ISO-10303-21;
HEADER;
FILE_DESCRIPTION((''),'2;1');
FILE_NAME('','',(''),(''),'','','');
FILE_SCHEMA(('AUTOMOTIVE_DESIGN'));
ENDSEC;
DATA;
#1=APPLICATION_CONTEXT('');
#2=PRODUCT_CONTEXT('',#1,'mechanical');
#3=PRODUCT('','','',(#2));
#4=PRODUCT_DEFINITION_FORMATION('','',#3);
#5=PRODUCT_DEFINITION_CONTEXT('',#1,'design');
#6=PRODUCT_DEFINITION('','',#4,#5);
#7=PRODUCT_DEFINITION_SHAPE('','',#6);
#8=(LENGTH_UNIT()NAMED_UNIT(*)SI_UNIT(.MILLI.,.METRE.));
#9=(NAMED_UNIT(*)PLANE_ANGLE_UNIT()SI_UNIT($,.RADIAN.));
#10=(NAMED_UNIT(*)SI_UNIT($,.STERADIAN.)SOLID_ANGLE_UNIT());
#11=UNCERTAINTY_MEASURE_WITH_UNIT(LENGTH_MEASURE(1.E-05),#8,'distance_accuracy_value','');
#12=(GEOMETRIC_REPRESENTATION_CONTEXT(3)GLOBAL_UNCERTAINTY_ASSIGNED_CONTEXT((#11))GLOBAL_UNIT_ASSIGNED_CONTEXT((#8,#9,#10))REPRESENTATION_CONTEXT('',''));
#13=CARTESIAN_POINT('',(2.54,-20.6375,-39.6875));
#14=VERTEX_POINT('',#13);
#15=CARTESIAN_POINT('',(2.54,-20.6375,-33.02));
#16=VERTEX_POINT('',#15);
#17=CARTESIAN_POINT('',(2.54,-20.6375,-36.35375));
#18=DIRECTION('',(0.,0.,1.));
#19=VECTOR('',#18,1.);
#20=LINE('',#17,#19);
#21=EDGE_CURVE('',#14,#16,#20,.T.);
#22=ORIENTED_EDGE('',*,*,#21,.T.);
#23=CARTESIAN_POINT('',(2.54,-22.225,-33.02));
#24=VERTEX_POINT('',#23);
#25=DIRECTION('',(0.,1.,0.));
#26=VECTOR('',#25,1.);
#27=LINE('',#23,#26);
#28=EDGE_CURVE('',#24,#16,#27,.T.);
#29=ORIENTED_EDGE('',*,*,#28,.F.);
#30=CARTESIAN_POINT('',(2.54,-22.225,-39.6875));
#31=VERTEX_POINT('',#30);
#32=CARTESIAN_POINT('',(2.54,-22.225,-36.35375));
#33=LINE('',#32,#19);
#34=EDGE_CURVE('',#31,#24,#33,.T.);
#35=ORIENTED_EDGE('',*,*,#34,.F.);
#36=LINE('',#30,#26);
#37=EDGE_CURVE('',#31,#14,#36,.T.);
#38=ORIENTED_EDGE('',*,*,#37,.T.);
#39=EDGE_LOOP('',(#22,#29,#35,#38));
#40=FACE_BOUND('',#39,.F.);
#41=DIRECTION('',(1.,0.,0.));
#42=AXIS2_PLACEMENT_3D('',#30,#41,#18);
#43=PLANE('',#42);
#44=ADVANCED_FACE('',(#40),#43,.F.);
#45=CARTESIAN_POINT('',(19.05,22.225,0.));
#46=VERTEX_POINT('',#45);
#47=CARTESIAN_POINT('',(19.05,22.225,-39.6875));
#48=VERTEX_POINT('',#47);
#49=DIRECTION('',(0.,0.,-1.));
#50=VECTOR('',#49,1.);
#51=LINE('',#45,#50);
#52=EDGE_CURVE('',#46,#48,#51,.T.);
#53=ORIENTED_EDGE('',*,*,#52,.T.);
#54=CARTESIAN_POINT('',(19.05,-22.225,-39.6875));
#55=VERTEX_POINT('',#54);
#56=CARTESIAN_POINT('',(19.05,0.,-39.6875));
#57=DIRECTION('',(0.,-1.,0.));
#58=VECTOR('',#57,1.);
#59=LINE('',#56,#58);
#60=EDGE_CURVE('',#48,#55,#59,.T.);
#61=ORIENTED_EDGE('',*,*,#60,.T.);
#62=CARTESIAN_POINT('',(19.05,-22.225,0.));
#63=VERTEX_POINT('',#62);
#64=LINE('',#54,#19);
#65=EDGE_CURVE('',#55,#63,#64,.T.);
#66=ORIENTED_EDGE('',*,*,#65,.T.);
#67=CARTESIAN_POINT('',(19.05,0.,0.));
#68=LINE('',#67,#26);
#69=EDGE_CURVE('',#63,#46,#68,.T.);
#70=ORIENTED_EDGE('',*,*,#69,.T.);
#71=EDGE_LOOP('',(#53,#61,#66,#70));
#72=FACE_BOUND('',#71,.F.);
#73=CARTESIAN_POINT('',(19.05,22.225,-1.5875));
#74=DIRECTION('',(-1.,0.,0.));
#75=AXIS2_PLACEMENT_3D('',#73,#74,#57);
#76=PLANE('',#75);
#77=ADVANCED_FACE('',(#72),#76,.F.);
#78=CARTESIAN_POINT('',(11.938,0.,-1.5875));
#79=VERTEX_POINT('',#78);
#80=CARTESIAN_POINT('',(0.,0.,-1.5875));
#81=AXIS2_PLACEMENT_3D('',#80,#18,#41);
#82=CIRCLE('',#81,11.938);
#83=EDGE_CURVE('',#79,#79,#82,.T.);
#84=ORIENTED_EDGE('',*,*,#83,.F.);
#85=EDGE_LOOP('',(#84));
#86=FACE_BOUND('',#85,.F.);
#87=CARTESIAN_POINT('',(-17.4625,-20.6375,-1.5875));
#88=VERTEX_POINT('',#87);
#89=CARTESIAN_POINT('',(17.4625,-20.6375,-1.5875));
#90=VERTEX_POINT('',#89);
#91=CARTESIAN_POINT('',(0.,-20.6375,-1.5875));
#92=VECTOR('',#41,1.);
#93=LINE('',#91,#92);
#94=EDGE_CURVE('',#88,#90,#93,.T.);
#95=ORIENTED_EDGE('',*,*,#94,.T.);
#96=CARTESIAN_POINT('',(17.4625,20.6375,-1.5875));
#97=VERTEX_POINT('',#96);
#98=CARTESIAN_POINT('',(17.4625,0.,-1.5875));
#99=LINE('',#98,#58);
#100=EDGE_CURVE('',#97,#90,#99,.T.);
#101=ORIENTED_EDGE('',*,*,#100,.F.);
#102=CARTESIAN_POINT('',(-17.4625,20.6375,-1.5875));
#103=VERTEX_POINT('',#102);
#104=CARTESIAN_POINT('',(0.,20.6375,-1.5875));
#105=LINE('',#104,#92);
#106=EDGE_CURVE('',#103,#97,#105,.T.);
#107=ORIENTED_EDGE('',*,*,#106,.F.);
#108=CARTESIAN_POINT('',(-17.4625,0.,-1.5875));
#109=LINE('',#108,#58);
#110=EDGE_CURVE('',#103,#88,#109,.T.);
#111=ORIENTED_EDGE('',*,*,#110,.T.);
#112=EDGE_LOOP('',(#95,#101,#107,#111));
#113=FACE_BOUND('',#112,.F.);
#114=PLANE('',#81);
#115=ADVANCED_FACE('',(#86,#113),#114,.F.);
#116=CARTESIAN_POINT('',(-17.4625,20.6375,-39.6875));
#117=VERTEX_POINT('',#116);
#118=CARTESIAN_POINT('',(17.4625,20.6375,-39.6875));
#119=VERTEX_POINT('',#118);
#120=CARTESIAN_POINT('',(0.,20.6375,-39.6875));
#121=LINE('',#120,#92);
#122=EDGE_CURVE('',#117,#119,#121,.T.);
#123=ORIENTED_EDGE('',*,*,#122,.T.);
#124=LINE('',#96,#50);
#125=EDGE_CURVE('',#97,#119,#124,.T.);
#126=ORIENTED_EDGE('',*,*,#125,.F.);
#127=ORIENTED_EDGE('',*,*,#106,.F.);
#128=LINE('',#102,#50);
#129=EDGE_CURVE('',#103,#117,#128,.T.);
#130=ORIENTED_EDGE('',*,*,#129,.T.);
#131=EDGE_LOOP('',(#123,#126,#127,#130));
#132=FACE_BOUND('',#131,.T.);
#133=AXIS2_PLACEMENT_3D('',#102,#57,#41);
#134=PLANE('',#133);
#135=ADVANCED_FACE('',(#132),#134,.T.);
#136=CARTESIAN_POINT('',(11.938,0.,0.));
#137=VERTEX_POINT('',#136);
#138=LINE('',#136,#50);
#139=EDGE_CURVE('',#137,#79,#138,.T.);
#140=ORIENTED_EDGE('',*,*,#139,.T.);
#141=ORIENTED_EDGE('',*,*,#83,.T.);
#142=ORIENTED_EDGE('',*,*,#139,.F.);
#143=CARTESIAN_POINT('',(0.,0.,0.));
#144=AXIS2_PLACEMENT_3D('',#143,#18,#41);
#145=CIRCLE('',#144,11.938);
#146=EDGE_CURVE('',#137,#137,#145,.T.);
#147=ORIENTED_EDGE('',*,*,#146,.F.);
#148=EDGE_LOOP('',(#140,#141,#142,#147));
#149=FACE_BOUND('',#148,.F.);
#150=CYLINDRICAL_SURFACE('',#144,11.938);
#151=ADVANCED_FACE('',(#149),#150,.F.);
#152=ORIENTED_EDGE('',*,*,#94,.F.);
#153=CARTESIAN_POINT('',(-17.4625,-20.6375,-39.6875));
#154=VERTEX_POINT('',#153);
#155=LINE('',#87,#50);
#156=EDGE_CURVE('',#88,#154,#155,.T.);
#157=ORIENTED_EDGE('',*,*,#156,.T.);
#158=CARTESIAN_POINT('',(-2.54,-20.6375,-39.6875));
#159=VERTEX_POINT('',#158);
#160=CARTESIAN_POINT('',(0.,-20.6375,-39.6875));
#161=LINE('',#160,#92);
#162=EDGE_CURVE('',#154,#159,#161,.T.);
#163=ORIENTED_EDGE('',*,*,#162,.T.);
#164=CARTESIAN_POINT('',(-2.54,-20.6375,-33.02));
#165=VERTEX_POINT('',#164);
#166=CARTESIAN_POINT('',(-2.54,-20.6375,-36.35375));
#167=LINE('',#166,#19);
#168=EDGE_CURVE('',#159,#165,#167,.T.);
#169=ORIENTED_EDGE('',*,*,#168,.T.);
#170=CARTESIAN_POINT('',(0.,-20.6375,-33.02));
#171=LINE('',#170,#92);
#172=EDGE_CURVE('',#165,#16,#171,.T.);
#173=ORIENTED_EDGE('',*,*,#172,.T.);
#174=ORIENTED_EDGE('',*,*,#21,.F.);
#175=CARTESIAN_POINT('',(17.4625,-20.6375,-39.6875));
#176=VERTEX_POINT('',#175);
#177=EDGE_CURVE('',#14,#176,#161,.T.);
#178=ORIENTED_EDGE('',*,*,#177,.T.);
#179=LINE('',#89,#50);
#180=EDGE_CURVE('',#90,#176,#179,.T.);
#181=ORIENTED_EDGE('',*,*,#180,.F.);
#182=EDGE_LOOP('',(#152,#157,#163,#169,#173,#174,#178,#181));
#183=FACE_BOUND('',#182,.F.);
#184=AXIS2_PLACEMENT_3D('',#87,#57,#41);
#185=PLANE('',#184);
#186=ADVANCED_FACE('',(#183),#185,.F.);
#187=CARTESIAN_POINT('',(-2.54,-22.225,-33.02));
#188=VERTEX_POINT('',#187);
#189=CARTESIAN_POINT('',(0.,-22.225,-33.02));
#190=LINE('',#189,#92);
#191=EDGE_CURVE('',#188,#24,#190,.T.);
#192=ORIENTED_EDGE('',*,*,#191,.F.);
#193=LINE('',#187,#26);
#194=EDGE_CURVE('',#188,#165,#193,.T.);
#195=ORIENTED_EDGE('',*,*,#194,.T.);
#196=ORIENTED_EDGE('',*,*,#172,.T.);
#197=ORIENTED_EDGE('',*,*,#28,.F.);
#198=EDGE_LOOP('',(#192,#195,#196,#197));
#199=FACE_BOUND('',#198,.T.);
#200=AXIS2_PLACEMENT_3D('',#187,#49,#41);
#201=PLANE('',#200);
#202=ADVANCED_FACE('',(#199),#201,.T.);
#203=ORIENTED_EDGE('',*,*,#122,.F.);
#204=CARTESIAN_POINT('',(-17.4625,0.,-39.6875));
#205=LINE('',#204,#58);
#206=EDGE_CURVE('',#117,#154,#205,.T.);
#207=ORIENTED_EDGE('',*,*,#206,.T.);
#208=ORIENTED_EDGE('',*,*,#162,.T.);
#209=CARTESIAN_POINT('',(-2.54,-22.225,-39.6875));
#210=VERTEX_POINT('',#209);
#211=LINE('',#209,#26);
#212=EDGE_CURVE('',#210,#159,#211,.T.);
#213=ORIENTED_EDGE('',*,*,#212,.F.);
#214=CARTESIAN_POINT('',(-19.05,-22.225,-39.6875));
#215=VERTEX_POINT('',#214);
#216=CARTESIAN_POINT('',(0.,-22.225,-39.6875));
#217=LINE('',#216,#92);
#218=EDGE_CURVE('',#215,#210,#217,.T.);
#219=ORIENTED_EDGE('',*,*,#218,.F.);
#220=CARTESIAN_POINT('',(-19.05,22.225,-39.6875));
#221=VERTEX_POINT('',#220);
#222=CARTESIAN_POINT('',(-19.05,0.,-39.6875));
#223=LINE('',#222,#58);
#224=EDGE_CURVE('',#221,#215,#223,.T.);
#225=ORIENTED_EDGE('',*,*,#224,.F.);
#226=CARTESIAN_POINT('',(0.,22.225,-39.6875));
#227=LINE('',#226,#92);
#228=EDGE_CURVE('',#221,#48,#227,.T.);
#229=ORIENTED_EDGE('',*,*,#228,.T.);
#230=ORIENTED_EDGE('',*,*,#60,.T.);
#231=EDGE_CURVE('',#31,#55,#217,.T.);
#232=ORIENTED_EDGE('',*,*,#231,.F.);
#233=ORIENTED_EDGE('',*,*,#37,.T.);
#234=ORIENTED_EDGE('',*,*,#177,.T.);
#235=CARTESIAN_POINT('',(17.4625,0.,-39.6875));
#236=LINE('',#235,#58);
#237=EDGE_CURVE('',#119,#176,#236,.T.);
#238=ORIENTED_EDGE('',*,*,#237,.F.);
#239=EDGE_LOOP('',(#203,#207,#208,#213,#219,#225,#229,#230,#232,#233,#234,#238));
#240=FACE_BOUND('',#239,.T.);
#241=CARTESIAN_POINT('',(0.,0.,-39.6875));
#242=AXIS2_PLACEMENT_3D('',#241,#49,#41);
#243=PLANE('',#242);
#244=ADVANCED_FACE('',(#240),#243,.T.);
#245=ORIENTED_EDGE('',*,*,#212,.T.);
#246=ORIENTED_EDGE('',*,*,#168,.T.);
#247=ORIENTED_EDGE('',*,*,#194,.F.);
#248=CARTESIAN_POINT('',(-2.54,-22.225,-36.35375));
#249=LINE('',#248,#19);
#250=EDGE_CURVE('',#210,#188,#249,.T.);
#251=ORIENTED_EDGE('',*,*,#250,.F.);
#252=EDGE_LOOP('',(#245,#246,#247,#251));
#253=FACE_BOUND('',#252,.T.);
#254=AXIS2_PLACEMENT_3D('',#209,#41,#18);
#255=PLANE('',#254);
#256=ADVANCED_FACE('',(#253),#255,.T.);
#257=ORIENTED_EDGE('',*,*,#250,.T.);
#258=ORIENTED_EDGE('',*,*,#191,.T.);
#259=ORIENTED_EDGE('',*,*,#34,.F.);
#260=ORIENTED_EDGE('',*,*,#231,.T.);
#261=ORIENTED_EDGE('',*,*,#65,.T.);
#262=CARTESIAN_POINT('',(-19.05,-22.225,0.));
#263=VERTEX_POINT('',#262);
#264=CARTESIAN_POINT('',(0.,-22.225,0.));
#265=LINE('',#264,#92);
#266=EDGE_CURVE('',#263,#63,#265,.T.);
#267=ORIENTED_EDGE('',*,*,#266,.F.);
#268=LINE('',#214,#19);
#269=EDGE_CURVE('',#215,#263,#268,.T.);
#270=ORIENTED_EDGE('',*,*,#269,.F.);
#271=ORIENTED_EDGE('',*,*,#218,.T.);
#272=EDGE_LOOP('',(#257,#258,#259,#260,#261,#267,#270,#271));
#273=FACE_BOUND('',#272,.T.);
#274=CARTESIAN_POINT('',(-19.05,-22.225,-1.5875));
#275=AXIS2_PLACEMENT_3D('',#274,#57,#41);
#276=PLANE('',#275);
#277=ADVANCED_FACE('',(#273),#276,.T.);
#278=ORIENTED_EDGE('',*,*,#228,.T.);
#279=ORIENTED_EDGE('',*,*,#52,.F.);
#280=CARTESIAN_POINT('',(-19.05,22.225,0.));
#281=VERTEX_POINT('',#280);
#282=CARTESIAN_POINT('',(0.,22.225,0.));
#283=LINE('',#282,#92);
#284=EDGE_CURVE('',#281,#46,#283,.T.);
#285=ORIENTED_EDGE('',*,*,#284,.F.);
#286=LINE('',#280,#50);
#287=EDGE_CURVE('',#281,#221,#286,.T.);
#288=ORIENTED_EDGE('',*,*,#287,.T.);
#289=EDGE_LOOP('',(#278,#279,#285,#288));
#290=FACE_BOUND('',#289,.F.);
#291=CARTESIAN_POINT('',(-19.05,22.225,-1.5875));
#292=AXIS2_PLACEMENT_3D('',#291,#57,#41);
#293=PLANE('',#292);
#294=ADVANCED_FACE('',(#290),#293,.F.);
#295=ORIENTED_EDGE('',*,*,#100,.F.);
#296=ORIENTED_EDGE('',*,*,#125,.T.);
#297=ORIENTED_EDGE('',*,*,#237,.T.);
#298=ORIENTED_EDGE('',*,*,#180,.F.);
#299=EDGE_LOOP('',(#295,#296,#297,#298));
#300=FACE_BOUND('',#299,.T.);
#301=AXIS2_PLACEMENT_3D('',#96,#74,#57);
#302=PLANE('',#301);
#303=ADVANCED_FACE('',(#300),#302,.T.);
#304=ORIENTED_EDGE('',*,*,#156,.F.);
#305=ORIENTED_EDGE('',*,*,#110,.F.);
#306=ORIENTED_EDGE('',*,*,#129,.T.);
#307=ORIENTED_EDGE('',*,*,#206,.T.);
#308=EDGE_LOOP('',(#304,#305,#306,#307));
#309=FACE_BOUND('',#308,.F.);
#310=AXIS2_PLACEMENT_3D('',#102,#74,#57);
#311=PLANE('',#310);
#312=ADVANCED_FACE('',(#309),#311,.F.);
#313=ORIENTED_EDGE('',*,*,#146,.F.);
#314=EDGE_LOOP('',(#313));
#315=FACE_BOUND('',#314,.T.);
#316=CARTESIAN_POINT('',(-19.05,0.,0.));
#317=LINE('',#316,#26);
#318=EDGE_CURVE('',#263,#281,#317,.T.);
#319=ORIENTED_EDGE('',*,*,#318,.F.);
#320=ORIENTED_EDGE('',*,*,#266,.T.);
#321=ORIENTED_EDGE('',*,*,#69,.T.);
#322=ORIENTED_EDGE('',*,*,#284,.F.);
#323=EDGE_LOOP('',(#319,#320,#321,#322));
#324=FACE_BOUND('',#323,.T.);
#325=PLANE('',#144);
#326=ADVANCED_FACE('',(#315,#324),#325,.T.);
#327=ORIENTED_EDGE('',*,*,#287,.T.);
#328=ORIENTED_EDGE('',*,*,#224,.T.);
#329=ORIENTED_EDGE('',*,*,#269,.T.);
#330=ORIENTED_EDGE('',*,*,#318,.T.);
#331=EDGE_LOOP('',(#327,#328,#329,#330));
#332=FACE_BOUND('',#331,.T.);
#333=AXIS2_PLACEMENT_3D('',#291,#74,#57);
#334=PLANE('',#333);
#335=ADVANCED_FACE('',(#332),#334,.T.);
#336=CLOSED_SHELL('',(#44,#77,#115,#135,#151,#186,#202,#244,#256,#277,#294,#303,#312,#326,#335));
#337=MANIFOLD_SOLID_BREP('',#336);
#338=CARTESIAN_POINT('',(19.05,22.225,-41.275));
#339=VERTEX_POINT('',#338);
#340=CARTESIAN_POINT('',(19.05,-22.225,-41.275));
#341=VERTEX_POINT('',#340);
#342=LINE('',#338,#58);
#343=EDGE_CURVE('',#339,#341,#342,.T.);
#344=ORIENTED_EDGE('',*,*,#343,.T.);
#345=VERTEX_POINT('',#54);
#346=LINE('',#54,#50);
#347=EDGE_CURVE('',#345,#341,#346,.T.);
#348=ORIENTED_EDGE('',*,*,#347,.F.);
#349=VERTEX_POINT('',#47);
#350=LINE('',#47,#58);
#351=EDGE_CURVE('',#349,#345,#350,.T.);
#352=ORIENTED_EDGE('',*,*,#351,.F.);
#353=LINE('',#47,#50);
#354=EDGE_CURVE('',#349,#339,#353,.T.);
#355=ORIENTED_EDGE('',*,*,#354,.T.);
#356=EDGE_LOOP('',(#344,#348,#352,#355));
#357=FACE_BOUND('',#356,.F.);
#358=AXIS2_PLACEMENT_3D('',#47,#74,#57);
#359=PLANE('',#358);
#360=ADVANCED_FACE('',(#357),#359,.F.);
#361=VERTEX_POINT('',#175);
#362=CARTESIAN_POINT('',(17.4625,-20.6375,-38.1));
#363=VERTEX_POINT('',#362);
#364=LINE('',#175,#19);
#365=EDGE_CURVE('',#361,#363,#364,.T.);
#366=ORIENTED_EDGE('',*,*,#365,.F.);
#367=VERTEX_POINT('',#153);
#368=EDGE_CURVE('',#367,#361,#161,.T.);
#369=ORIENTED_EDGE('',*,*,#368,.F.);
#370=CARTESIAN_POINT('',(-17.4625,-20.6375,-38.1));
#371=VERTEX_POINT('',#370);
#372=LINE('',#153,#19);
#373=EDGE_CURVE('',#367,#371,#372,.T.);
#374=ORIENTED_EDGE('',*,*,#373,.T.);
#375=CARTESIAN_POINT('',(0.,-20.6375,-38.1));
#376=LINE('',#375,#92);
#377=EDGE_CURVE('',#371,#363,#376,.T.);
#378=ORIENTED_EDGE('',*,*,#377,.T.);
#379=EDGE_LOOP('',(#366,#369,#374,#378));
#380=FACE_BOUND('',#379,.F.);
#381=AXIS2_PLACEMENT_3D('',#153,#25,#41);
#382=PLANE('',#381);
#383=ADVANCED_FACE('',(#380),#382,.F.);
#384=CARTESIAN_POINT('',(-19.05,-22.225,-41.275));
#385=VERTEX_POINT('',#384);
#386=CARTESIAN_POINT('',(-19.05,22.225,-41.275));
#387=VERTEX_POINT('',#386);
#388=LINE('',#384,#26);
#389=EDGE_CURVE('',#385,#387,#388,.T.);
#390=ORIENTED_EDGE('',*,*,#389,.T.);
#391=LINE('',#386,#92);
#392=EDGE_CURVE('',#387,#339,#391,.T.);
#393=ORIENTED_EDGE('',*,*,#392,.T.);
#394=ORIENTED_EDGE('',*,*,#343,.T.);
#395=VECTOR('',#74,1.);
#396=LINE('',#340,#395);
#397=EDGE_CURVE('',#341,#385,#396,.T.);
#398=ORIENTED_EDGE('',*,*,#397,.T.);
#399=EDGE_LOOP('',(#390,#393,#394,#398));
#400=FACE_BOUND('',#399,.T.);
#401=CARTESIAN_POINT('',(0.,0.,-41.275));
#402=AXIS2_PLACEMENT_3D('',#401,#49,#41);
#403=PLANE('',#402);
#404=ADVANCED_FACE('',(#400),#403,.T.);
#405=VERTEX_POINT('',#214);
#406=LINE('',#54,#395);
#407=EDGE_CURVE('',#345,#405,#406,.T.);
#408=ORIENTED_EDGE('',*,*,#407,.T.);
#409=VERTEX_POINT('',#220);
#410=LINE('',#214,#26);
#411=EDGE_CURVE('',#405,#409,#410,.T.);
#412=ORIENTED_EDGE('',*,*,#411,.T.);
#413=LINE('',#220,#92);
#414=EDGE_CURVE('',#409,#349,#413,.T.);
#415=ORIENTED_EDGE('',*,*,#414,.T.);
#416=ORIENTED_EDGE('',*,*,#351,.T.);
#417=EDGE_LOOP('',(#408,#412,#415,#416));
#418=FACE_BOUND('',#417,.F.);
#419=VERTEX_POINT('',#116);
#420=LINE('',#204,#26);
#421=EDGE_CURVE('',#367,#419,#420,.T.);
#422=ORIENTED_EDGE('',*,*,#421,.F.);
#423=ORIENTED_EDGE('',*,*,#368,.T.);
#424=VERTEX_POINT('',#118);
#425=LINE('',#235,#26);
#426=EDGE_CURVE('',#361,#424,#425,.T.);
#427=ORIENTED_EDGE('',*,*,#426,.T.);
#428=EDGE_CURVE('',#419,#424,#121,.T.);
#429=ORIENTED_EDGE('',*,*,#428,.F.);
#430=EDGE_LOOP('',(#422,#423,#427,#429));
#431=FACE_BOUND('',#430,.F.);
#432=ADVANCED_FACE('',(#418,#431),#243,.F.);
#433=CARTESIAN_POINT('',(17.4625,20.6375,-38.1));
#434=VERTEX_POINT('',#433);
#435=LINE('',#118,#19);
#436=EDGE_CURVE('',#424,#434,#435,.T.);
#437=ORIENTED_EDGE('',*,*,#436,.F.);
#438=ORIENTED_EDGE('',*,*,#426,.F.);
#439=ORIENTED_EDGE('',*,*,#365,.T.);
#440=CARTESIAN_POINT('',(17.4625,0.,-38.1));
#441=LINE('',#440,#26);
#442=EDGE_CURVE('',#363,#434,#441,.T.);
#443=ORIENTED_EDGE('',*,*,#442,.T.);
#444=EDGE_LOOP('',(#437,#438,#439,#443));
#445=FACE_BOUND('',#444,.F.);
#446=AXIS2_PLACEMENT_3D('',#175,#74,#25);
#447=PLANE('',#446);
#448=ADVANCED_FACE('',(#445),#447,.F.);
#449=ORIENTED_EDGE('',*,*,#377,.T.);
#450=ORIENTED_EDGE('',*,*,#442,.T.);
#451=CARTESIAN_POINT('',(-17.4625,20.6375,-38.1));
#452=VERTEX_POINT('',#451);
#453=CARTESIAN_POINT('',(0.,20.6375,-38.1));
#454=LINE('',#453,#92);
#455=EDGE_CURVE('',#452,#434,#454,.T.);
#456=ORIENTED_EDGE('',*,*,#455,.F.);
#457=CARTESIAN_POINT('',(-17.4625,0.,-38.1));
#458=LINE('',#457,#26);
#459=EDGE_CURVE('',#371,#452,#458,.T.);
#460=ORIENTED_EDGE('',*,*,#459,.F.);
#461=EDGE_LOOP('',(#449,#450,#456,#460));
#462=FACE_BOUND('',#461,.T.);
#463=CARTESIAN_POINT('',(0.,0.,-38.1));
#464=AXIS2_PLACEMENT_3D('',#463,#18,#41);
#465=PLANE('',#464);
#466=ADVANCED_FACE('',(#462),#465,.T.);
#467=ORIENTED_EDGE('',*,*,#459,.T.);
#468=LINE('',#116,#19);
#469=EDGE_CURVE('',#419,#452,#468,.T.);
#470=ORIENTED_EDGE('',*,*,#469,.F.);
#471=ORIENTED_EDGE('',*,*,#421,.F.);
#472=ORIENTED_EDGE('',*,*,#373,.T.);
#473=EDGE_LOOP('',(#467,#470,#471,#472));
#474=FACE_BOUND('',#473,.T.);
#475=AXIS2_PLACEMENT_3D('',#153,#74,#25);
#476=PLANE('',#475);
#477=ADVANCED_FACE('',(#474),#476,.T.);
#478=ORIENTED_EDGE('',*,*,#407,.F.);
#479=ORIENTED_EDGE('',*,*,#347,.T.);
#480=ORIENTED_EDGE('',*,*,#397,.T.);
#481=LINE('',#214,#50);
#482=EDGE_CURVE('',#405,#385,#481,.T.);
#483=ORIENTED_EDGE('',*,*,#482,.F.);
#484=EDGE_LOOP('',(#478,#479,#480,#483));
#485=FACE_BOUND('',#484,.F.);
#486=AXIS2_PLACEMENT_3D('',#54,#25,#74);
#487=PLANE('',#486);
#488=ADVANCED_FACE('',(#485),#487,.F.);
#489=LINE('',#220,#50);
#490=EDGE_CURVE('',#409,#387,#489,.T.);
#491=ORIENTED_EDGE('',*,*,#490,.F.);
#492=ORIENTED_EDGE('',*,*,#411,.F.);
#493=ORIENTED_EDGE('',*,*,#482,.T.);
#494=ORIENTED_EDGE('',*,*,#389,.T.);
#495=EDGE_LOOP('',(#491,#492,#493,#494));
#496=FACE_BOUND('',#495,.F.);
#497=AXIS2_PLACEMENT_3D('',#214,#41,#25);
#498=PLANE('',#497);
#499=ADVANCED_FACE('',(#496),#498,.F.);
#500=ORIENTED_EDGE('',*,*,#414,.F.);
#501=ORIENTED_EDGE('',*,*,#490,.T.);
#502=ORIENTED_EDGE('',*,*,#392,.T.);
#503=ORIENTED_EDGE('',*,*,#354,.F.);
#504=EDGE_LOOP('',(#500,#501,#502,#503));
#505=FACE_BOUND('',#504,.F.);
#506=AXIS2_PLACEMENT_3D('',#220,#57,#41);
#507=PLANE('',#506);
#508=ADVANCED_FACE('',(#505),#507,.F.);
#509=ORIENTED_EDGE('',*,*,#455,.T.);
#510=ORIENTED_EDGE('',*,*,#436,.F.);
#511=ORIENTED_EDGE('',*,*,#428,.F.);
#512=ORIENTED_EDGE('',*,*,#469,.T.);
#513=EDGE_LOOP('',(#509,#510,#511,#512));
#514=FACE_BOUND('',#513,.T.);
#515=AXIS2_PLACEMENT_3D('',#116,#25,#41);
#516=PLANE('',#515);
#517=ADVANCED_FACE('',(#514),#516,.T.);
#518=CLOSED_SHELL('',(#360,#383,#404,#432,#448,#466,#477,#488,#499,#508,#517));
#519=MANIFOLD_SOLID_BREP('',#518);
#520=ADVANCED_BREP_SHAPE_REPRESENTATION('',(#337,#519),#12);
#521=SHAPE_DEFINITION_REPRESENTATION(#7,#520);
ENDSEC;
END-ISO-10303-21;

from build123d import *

# Parameters (mm, degrees)
F0_W     = 38.1
F0_H     = 44.45
F0_R     = 11.938
F1_DEPTH = 1.5875
F2_W     = 38.1
F2_H     = 44.45
F2_W_2   = 34.925
F2_H_2   = 41.275
F3_DEPTH = 38.1
F4_W     = 5.08
F4_H     = 6.6675
F5_DEPTH = 1.5875
F7_DEPTH = 1.5875
F8_W     = 34.925
F8_H     = 41.275
F9_DEPTH = 1.5875


with BuildPart() as f1:
    # F0 (on Top) → F1 (new body)
    with BuildSketch(Plane.XY):
        Rectangle(F0_W, F0_H)
        Circle(F0_R, mode=Mode.SUBTRACT)
    extrude(amount=-F1_DEPTH)

    # F2 (on face) → F3 (join)
    with BuildSketch(Plane(origin=(0, 0, -1.5875), x_dir=(1, 0, 0), z_dir=(0, 0, -1))):
        Rectangle(F2_W, F2_H)
        Rectangle(F2_W_2, F2_H_2, mode=Mode.SUBTRACT)
    extrude(amount=F3_DEPTH)

    # F4 (on face) → F5 (cut, through all)
    with BuildSketch(Plane.XZ.offset(22.225)):
        with Locations((0, -36.35375)):
            Rectangle(F4_W, F4_H)
    extrude(amount=-F5_DEPTH, mode=Mode.SUBTRACT)


with BuildPart() as f7:
    # F6 (on face) → F7 (new body)
    with BuildSketch(Plane(origin=(0, 0, -39.6875), x_dir=(1, 0, 0), z_dir=(0, 0, -1))):
        Polygon((19.05, 22.225), (2.54, 22.225), (-2.54, 22.225), (-19.05, 22.225), (-19.05, -22.225), (19.05, -22.225), align=None)
    extrude(amount=F7_DEPTH)

    # F8 (on face) → F9 (join)
    with BuildSketch(Plane.XY.offset(-39.6875)):
        Rectangle(F8_W, F8_H)
    extrude(amount=F9_DEPTH)


solid = Compound([f1.part, f7.part])
